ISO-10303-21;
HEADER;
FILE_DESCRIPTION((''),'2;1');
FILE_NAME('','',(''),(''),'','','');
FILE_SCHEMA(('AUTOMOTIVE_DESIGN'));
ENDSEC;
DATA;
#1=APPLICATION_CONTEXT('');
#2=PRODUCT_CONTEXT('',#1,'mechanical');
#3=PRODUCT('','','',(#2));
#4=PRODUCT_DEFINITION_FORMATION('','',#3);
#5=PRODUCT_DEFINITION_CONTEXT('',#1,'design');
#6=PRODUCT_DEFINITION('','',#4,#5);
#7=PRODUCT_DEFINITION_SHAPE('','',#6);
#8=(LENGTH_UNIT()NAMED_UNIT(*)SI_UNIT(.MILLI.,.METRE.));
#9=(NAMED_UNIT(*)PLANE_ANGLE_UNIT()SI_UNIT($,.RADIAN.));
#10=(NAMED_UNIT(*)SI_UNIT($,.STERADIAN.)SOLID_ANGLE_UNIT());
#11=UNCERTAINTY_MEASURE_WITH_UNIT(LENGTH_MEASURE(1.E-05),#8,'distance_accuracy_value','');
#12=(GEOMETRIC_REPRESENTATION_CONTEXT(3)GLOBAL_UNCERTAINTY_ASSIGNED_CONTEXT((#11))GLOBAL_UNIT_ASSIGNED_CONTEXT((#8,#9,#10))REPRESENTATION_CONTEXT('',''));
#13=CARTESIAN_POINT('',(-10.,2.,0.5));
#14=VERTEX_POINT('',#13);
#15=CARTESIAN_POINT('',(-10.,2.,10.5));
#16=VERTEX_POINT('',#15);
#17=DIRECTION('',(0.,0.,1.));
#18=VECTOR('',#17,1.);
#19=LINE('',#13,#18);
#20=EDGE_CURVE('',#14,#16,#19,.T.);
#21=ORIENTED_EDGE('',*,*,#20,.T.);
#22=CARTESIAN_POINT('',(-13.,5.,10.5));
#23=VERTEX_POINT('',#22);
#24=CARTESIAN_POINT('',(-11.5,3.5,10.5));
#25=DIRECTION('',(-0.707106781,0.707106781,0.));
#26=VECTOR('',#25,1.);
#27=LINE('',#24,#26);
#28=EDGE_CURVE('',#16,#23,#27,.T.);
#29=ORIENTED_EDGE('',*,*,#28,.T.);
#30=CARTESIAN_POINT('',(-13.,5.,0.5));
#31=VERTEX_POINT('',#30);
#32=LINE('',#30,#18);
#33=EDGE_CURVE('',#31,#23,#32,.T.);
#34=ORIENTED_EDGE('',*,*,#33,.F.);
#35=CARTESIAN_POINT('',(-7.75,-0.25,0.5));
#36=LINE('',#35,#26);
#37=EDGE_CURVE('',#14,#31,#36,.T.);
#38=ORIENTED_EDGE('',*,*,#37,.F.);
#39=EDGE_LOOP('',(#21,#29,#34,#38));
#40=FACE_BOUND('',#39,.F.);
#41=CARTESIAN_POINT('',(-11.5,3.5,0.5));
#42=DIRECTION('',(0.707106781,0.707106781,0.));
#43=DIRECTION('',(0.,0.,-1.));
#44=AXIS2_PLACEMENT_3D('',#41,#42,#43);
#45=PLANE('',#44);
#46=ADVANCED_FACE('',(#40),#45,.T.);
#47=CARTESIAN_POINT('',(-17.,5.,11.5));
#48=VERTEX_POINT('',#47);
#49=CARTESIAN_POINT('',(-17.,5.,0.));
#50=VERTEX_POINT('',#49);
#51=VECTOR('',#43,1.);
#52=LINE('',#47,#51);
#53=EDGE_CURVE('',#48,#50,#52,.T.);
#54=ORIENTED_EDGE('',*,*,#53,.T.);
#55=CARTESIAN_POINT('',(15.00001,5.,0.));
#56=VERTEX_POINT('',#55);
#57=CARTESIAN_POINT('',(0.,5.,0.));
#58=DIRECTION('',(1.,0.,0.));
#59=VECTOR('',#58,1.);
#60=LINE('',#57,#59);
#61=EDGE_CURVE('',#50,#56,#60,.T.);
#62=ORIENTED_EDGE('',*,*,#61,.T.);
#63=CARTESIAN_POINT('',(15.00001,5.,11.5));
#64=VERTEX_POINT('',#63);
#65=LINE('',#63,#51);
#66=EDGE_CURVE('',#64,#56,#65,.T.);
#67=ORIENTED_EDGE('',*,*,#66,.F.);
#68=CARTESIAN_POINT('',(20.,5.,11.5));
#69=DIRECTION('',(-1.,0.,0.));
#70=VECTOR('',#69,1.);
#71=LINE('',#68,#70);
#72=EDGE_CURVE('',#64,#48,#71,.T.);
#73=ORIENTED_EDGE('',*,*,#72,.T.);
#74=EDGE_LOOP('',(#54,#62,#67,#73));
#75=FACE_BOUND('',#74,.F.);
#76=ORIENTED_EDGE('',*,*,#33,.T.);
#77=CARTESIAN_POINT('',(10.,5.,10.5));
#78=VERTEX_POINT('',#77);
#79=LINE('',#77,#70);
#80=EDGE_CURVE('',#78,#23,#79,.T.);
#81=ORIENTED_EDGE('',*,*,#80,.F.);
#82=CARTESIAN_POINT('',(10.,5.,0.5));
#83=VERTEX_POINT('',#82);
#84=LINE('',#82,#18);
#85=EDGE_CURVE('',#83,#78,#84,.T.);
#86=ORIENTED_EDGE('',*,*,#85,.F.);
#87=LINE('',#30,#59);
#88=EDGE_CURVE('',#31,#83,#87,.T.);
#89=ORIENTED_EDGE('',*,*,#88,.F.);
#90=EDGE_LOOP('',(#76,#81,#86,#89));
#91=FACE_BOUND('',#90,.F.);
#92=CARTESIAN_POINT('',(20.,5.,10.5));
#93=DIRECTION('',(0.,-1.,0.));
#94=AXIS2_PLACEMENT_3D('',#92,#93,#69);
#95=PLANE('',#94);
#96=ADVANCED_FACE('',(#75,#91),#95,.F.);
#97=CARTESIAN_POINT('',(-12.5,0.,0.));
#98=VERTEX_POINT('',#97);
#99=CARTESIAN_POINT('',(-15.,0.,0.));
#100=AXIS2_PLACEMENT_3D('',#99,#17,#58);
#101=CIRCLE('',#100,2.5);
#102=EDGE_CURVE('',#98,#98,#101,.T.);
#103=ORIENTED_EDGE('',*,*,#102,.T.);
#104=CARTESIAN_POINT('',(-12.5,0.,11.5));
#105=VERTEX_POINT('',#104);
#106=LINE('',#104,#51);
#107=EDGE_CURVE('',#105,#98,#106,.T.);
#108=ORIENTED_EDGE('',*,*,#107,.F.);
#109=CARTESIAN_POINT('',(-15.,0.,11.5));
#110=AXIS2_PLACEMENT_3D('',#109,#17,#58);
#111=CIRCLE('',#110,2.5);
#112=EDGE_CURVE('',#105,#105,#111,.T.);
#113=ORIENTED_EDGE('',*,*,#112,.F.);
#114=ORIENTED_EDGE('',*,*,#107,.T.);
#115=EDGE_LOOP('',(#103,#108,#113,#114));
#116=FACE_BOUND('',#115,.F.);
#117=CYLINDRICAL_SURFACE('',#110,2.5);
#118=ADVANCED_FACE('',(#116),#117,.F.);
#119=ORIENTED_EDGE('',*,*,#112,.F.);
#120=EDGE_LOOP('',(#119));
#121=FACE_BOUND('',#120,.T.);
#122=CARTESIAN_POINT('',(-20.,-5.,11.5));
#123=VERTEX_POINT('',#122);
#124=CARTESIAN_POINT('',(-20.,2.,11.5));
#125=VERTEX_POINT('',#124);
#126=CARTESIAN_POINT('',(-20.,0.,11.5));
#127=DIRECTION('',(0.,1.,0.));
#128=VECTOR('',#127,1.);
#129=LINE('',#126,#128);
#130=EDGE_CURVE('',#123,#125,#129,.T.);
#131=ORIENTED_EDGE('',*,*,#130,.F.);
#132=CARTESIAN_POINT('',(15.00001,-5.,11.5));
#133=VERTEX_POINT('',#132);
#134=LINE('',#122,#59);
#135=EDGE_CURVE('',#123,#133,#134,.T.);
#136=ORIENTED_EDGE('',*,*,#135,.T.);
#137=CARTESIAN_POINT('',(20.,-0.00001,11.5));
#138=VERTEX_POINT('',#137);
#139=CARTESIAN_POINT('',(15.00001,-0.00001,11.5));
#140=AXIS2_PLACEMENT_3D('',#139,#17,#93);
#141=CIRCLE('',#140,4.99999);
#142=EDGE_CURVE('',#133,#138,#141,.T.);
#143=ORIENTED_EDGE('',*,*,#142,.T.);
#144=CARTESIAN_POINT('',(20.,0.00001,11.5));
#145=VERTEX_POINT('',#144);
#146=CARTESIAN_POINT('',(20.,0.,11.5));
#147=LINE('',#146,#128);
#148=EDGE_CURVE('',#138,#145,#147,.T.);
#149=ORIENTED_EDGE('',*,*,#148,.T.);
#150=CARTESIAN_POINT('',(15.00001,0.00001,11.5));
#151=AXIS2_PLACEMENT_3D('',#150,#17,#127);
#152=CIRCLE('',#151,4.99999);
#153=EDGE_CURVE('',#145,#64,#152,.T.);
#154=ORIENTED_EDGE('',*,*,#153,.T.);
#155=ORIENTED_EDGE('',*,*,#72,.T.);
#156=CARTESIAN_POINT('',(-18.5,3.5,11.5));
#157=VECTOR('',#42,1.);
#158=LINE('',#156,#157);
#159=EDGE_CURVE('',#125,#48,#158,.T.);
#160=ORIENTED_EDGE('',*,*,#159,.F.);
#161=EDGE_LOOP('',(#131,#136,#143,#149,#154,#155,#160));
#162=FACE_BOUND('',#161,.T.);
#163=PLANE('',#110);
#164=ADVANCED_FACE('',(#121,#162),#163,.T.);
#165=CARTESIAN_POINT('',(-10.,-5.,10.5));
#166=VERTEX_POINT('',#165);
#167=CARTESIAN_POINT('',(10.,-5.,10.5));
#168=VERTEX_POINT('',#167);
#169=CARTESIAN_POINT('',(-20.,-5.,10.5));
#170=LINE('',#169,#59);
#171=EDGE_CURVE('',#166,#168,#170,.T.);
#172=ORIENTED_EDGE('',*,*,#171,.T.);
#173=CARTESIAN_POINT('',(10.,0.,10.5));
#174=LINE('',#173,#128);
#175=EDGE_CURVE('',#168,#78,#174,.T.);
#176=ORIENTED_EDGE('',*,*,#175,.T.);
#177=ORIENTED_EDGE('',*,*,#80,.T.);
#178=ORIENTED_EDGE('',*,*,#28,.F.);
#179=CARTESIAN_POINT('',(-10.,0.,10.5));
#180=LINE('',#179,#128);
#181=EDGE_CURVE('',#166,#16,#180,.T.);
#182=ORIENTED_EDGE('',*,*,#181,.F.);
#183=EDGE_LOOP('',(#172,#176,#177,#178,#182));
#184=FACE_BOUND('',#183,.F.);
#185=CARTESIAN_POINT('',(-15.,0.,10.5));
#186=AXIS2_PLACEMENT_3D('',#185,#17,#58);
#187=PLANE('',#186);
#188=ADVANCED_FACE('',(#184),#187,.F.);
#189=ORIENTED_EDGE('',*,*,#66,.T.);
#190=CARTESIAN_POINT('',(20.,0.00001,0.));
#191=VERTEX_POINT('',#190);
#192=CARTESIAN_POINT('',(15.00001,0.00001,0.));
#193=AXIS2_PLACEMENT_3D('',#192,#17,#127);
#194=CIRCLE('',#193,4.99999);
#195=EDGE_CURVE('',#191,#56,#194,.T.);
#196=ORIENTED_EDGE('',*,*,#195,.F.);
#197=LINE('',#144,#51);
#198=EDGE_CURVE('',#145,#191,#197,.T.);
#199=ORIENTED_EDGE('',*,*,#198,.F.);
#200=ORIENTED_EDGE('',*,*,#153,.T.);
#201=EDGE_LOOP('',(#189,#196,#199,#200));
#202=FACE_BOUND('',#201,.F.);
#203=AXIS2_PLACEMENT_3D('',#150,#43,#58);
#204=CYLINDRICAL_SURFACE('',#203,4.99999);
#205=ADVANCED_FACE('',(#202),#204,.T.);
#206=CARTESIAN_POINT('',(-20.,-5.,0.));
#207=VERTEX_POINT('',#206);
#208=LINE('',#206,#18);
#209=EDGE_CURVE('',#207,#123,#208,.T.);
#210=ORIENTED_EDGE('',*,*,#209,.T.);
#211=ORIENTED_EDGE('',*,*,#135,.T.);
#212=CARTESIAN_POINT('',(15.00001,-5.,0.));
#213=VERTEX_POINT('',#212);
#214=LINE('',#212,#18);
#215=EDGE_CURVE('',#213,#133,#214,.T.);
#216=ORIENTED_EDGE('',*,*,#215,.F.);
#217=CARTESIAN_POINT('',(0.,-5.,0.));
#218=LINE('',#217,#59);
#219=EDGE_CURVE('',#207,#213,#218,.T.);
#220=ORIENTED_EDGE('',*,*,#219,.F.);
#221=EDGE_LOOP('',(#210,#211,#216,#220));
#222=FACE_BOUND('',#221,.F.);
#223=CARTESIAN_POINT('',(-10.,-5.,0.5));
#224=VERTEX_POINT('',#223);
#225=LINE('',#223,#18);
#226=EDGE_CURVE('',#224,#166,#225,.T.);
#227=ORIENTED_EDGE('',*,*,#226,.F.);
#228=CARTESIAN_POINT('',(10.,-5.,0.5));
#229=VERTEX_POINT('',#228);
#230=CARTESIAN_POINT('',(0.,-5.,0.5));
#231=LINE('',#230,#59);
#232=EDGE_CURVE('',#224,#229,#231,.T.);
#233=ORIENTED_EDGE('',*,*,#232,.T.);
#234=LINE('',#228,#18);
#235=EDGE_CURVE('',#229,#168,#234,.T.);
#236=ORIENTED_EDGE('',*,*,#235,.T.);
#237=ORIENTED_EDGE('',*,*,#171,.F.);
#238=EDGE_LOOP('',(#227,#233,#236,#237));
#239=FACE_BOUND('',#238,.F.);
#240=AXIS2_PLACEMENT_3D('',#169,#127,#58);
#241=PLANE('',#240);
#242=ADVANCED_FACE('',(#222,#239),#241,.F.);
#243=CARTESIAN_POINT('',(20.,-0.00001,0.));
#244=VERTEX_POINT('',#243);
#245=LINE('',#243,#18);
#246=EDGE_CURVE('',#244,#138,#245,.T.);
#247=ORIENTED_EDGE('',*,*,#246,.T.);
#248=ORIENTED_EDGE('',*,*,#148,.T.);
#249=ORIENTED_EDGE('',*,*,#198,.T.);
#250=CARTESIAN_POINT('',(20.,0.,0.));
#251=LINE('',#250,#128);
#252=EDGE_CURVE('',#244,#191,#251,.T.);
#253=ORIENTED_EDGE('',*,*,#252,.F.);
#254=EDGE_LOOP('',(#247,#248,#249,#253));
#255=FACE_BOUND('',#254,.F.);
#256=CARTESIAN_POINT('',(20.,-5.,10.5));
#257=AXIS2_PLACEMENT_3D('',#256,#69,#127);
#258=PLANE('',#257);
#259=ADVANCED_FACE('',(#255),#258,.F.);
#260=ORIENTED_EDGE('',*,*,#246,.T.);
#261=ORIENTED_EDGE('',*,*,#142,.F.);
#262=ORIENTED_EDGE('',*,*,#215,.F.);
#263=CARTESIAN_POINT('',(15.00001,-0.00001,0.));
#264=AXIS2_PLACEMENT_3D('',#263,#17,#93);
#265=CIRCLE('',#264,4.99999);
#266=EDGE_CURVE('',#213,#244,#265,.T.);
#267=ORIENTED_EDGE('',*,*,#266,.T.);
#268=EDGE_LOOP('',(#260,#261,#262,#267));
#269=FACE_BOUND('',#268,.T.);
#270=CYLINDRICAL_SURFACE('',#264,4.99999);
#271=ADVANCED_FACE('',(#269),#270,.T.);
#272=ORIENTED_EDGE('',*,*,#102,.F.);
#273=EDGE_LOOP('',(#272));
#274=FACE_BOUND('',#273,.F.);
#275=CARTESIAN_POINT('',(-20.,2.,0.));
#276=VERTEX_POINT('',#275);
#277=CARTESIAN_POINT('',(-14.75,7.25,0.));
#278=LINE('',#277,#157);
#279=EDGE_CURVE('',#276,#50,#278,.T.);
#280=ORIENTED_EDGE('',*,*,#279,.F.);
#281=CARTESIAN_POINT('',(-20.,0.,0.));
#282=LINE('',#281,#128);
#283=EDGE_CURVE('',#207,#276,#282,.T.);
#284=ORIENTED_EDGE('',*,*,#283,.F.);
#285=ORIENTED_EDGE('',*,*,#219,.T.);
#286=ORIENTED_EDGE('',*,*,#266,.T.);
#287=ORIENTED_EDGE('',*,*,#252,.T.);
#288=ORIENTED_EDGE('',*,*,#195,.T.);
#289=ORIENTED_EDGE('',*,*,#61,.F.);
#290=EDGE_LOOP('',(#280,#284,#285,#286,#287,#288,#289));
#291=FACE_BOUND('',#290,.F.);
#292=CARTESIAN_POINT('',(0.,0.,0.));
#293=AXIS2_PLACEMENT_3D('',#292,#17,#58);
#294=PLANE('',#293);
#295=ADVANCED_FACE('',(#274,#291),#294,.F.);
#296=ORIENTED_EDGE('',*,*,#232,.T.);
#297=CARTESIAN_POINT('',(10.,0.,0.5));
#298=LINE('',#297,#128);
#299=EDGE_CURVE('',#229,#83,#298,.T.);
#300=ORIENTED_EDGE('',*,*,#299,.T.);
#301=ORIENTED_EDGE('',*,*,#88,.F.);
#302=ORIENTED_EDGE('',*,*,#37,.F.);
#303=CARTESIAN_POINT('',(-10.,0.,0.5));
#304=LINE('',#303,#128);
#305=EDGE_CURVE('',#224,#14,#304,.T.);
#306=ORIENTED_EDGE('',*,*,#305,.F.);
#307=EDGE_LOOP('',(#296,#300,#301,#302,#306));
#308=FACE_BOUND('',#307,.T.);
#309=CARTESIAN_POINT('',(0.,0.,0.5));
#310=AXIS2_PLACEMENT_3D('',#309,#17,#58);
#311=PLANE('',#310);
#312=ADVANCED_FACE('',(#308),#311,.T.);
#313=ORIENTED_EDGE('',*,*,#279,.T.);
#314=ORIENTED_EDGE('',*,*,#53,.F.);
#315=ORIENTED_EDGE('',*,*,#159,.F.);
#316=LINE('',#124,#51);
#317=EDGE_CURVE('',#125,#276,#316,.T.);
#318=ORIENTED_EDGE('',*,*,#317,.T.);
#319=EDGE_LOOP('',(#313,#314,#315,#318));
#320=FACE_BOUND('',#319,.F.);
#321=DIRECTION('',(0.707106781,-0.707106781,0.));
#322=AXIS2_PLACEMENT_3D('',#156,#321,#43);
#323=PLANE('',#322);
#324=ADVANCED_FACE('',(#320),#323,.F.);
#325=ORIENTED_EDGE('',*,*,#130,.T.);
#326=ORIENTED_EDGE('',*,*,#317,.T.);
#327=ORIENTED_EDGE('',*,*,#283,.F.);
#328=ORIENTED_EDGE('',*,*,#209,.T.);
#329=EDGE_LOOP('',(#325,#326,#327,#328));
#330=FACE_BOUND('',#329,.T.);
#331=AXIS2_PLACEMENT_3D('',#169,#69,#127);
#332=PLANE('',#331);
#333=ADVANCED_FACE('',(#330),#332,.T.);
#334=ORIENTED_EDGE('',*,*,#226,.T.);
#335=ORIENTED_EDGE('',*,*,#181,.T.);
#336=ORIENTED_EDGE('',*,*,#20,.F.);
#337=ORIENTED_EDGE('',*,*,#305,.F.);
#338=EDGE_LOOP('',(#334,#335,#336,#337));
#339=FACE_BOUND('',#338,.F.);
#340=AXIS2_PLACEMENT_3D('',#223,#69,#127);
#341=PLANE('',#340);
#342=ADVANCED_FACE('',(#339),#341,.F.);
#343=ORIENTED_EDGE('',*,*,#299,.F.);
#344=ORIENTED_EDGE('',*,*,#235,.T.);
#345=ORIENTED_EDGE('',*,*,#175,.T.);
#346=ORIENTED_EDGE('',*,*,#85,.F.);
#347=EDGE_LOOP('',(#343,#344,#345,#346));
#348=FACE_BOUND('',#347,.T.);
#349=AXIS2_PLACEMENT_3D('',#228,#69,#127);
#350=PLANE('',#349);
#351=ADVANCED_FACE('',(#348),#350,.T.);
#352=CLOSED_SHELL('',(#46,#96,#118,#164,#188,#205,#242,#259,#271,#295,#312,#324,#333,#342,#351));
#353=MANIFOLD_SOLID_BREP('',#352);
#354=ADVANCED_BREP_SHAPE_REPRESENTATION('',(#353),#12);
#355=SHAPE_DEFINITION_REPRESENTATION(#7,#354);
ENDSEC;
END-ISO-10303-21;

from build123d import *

# Parameters (mm, degrees)
F0_W     = 40
F0_H     = 10
F1_DEPTH = 0.5
F2_W     = 10
F2_H     = 10
F3_DEPTH = 10
F4_W     = 10
F4_H     = 10
F4_W_2   = 30
F5_DEPTH = 1
F6_R     = 4.99999
F7_R     = 2.5
F8_DEPTH = 25
F9_SIZE  = 3


# Not quite as in the source:
# - a fillet or chamfer is up to 0.001 mm smaller than in the source, because OpenCascade refuses the exact size


with BuildPart() as f1:
    # F0 (on Top) → F1 (new body)
    with BuildSketch(Plane.XY):
        Rectangle(F0_W, F0_H)
    extrude(amount=F1_DEPTH)

    # F2 (on face) → F3 (join)
    with BuildSketch(Plane.XY.offset(0.5)):
        with Locations((-15, 0)):
            Rectangle(F2_W, F2_H)
        with Locations((15, 0)):
            Rectangle(F2_W, F2_H)
    extrude(amount=F3_DEPTH)

    # F4 (on face) → F5 (join)
    with BuildSketch(Plane.XY.offset(10.5)):
        with Locations((-15, 0)):
            Rectangle(F4_W, F4_H)
        with Locations((5, 0)):
            Rectangle(F4_W_2, F4_H)
    extrude(amount=F5_DEPTH)

    # F6 (radius 5 in the source; OpenCascade refuses exactly that, so slightly less here)
    f6_edges = [f1.edges().sort_by_distance(p)[0] for p in [
        (20, -5, 5.75),
        (20, 5, 5.75),
    ]]
    fillet(f6_edges, radius=F6_R)

    # F7 (on face) → F8 (cut)
    with BuildSketch(Plane.XY.offset(11.5)):
        with Locations((-15, 0)):
            Circle(F7_R)
    extrude(amount=-F8_DEPTH, mode=Mode.SUBTRACT)

    # F9
    f9_edges = [f1.edges().sort_by_distance(p)[0] for p in [
        (-20, 5, 5.75),
        (-10, 5, 5.5),
    ]]
    chamfer(f9_edges, length=F9_SIZE)


solid = f1.part
